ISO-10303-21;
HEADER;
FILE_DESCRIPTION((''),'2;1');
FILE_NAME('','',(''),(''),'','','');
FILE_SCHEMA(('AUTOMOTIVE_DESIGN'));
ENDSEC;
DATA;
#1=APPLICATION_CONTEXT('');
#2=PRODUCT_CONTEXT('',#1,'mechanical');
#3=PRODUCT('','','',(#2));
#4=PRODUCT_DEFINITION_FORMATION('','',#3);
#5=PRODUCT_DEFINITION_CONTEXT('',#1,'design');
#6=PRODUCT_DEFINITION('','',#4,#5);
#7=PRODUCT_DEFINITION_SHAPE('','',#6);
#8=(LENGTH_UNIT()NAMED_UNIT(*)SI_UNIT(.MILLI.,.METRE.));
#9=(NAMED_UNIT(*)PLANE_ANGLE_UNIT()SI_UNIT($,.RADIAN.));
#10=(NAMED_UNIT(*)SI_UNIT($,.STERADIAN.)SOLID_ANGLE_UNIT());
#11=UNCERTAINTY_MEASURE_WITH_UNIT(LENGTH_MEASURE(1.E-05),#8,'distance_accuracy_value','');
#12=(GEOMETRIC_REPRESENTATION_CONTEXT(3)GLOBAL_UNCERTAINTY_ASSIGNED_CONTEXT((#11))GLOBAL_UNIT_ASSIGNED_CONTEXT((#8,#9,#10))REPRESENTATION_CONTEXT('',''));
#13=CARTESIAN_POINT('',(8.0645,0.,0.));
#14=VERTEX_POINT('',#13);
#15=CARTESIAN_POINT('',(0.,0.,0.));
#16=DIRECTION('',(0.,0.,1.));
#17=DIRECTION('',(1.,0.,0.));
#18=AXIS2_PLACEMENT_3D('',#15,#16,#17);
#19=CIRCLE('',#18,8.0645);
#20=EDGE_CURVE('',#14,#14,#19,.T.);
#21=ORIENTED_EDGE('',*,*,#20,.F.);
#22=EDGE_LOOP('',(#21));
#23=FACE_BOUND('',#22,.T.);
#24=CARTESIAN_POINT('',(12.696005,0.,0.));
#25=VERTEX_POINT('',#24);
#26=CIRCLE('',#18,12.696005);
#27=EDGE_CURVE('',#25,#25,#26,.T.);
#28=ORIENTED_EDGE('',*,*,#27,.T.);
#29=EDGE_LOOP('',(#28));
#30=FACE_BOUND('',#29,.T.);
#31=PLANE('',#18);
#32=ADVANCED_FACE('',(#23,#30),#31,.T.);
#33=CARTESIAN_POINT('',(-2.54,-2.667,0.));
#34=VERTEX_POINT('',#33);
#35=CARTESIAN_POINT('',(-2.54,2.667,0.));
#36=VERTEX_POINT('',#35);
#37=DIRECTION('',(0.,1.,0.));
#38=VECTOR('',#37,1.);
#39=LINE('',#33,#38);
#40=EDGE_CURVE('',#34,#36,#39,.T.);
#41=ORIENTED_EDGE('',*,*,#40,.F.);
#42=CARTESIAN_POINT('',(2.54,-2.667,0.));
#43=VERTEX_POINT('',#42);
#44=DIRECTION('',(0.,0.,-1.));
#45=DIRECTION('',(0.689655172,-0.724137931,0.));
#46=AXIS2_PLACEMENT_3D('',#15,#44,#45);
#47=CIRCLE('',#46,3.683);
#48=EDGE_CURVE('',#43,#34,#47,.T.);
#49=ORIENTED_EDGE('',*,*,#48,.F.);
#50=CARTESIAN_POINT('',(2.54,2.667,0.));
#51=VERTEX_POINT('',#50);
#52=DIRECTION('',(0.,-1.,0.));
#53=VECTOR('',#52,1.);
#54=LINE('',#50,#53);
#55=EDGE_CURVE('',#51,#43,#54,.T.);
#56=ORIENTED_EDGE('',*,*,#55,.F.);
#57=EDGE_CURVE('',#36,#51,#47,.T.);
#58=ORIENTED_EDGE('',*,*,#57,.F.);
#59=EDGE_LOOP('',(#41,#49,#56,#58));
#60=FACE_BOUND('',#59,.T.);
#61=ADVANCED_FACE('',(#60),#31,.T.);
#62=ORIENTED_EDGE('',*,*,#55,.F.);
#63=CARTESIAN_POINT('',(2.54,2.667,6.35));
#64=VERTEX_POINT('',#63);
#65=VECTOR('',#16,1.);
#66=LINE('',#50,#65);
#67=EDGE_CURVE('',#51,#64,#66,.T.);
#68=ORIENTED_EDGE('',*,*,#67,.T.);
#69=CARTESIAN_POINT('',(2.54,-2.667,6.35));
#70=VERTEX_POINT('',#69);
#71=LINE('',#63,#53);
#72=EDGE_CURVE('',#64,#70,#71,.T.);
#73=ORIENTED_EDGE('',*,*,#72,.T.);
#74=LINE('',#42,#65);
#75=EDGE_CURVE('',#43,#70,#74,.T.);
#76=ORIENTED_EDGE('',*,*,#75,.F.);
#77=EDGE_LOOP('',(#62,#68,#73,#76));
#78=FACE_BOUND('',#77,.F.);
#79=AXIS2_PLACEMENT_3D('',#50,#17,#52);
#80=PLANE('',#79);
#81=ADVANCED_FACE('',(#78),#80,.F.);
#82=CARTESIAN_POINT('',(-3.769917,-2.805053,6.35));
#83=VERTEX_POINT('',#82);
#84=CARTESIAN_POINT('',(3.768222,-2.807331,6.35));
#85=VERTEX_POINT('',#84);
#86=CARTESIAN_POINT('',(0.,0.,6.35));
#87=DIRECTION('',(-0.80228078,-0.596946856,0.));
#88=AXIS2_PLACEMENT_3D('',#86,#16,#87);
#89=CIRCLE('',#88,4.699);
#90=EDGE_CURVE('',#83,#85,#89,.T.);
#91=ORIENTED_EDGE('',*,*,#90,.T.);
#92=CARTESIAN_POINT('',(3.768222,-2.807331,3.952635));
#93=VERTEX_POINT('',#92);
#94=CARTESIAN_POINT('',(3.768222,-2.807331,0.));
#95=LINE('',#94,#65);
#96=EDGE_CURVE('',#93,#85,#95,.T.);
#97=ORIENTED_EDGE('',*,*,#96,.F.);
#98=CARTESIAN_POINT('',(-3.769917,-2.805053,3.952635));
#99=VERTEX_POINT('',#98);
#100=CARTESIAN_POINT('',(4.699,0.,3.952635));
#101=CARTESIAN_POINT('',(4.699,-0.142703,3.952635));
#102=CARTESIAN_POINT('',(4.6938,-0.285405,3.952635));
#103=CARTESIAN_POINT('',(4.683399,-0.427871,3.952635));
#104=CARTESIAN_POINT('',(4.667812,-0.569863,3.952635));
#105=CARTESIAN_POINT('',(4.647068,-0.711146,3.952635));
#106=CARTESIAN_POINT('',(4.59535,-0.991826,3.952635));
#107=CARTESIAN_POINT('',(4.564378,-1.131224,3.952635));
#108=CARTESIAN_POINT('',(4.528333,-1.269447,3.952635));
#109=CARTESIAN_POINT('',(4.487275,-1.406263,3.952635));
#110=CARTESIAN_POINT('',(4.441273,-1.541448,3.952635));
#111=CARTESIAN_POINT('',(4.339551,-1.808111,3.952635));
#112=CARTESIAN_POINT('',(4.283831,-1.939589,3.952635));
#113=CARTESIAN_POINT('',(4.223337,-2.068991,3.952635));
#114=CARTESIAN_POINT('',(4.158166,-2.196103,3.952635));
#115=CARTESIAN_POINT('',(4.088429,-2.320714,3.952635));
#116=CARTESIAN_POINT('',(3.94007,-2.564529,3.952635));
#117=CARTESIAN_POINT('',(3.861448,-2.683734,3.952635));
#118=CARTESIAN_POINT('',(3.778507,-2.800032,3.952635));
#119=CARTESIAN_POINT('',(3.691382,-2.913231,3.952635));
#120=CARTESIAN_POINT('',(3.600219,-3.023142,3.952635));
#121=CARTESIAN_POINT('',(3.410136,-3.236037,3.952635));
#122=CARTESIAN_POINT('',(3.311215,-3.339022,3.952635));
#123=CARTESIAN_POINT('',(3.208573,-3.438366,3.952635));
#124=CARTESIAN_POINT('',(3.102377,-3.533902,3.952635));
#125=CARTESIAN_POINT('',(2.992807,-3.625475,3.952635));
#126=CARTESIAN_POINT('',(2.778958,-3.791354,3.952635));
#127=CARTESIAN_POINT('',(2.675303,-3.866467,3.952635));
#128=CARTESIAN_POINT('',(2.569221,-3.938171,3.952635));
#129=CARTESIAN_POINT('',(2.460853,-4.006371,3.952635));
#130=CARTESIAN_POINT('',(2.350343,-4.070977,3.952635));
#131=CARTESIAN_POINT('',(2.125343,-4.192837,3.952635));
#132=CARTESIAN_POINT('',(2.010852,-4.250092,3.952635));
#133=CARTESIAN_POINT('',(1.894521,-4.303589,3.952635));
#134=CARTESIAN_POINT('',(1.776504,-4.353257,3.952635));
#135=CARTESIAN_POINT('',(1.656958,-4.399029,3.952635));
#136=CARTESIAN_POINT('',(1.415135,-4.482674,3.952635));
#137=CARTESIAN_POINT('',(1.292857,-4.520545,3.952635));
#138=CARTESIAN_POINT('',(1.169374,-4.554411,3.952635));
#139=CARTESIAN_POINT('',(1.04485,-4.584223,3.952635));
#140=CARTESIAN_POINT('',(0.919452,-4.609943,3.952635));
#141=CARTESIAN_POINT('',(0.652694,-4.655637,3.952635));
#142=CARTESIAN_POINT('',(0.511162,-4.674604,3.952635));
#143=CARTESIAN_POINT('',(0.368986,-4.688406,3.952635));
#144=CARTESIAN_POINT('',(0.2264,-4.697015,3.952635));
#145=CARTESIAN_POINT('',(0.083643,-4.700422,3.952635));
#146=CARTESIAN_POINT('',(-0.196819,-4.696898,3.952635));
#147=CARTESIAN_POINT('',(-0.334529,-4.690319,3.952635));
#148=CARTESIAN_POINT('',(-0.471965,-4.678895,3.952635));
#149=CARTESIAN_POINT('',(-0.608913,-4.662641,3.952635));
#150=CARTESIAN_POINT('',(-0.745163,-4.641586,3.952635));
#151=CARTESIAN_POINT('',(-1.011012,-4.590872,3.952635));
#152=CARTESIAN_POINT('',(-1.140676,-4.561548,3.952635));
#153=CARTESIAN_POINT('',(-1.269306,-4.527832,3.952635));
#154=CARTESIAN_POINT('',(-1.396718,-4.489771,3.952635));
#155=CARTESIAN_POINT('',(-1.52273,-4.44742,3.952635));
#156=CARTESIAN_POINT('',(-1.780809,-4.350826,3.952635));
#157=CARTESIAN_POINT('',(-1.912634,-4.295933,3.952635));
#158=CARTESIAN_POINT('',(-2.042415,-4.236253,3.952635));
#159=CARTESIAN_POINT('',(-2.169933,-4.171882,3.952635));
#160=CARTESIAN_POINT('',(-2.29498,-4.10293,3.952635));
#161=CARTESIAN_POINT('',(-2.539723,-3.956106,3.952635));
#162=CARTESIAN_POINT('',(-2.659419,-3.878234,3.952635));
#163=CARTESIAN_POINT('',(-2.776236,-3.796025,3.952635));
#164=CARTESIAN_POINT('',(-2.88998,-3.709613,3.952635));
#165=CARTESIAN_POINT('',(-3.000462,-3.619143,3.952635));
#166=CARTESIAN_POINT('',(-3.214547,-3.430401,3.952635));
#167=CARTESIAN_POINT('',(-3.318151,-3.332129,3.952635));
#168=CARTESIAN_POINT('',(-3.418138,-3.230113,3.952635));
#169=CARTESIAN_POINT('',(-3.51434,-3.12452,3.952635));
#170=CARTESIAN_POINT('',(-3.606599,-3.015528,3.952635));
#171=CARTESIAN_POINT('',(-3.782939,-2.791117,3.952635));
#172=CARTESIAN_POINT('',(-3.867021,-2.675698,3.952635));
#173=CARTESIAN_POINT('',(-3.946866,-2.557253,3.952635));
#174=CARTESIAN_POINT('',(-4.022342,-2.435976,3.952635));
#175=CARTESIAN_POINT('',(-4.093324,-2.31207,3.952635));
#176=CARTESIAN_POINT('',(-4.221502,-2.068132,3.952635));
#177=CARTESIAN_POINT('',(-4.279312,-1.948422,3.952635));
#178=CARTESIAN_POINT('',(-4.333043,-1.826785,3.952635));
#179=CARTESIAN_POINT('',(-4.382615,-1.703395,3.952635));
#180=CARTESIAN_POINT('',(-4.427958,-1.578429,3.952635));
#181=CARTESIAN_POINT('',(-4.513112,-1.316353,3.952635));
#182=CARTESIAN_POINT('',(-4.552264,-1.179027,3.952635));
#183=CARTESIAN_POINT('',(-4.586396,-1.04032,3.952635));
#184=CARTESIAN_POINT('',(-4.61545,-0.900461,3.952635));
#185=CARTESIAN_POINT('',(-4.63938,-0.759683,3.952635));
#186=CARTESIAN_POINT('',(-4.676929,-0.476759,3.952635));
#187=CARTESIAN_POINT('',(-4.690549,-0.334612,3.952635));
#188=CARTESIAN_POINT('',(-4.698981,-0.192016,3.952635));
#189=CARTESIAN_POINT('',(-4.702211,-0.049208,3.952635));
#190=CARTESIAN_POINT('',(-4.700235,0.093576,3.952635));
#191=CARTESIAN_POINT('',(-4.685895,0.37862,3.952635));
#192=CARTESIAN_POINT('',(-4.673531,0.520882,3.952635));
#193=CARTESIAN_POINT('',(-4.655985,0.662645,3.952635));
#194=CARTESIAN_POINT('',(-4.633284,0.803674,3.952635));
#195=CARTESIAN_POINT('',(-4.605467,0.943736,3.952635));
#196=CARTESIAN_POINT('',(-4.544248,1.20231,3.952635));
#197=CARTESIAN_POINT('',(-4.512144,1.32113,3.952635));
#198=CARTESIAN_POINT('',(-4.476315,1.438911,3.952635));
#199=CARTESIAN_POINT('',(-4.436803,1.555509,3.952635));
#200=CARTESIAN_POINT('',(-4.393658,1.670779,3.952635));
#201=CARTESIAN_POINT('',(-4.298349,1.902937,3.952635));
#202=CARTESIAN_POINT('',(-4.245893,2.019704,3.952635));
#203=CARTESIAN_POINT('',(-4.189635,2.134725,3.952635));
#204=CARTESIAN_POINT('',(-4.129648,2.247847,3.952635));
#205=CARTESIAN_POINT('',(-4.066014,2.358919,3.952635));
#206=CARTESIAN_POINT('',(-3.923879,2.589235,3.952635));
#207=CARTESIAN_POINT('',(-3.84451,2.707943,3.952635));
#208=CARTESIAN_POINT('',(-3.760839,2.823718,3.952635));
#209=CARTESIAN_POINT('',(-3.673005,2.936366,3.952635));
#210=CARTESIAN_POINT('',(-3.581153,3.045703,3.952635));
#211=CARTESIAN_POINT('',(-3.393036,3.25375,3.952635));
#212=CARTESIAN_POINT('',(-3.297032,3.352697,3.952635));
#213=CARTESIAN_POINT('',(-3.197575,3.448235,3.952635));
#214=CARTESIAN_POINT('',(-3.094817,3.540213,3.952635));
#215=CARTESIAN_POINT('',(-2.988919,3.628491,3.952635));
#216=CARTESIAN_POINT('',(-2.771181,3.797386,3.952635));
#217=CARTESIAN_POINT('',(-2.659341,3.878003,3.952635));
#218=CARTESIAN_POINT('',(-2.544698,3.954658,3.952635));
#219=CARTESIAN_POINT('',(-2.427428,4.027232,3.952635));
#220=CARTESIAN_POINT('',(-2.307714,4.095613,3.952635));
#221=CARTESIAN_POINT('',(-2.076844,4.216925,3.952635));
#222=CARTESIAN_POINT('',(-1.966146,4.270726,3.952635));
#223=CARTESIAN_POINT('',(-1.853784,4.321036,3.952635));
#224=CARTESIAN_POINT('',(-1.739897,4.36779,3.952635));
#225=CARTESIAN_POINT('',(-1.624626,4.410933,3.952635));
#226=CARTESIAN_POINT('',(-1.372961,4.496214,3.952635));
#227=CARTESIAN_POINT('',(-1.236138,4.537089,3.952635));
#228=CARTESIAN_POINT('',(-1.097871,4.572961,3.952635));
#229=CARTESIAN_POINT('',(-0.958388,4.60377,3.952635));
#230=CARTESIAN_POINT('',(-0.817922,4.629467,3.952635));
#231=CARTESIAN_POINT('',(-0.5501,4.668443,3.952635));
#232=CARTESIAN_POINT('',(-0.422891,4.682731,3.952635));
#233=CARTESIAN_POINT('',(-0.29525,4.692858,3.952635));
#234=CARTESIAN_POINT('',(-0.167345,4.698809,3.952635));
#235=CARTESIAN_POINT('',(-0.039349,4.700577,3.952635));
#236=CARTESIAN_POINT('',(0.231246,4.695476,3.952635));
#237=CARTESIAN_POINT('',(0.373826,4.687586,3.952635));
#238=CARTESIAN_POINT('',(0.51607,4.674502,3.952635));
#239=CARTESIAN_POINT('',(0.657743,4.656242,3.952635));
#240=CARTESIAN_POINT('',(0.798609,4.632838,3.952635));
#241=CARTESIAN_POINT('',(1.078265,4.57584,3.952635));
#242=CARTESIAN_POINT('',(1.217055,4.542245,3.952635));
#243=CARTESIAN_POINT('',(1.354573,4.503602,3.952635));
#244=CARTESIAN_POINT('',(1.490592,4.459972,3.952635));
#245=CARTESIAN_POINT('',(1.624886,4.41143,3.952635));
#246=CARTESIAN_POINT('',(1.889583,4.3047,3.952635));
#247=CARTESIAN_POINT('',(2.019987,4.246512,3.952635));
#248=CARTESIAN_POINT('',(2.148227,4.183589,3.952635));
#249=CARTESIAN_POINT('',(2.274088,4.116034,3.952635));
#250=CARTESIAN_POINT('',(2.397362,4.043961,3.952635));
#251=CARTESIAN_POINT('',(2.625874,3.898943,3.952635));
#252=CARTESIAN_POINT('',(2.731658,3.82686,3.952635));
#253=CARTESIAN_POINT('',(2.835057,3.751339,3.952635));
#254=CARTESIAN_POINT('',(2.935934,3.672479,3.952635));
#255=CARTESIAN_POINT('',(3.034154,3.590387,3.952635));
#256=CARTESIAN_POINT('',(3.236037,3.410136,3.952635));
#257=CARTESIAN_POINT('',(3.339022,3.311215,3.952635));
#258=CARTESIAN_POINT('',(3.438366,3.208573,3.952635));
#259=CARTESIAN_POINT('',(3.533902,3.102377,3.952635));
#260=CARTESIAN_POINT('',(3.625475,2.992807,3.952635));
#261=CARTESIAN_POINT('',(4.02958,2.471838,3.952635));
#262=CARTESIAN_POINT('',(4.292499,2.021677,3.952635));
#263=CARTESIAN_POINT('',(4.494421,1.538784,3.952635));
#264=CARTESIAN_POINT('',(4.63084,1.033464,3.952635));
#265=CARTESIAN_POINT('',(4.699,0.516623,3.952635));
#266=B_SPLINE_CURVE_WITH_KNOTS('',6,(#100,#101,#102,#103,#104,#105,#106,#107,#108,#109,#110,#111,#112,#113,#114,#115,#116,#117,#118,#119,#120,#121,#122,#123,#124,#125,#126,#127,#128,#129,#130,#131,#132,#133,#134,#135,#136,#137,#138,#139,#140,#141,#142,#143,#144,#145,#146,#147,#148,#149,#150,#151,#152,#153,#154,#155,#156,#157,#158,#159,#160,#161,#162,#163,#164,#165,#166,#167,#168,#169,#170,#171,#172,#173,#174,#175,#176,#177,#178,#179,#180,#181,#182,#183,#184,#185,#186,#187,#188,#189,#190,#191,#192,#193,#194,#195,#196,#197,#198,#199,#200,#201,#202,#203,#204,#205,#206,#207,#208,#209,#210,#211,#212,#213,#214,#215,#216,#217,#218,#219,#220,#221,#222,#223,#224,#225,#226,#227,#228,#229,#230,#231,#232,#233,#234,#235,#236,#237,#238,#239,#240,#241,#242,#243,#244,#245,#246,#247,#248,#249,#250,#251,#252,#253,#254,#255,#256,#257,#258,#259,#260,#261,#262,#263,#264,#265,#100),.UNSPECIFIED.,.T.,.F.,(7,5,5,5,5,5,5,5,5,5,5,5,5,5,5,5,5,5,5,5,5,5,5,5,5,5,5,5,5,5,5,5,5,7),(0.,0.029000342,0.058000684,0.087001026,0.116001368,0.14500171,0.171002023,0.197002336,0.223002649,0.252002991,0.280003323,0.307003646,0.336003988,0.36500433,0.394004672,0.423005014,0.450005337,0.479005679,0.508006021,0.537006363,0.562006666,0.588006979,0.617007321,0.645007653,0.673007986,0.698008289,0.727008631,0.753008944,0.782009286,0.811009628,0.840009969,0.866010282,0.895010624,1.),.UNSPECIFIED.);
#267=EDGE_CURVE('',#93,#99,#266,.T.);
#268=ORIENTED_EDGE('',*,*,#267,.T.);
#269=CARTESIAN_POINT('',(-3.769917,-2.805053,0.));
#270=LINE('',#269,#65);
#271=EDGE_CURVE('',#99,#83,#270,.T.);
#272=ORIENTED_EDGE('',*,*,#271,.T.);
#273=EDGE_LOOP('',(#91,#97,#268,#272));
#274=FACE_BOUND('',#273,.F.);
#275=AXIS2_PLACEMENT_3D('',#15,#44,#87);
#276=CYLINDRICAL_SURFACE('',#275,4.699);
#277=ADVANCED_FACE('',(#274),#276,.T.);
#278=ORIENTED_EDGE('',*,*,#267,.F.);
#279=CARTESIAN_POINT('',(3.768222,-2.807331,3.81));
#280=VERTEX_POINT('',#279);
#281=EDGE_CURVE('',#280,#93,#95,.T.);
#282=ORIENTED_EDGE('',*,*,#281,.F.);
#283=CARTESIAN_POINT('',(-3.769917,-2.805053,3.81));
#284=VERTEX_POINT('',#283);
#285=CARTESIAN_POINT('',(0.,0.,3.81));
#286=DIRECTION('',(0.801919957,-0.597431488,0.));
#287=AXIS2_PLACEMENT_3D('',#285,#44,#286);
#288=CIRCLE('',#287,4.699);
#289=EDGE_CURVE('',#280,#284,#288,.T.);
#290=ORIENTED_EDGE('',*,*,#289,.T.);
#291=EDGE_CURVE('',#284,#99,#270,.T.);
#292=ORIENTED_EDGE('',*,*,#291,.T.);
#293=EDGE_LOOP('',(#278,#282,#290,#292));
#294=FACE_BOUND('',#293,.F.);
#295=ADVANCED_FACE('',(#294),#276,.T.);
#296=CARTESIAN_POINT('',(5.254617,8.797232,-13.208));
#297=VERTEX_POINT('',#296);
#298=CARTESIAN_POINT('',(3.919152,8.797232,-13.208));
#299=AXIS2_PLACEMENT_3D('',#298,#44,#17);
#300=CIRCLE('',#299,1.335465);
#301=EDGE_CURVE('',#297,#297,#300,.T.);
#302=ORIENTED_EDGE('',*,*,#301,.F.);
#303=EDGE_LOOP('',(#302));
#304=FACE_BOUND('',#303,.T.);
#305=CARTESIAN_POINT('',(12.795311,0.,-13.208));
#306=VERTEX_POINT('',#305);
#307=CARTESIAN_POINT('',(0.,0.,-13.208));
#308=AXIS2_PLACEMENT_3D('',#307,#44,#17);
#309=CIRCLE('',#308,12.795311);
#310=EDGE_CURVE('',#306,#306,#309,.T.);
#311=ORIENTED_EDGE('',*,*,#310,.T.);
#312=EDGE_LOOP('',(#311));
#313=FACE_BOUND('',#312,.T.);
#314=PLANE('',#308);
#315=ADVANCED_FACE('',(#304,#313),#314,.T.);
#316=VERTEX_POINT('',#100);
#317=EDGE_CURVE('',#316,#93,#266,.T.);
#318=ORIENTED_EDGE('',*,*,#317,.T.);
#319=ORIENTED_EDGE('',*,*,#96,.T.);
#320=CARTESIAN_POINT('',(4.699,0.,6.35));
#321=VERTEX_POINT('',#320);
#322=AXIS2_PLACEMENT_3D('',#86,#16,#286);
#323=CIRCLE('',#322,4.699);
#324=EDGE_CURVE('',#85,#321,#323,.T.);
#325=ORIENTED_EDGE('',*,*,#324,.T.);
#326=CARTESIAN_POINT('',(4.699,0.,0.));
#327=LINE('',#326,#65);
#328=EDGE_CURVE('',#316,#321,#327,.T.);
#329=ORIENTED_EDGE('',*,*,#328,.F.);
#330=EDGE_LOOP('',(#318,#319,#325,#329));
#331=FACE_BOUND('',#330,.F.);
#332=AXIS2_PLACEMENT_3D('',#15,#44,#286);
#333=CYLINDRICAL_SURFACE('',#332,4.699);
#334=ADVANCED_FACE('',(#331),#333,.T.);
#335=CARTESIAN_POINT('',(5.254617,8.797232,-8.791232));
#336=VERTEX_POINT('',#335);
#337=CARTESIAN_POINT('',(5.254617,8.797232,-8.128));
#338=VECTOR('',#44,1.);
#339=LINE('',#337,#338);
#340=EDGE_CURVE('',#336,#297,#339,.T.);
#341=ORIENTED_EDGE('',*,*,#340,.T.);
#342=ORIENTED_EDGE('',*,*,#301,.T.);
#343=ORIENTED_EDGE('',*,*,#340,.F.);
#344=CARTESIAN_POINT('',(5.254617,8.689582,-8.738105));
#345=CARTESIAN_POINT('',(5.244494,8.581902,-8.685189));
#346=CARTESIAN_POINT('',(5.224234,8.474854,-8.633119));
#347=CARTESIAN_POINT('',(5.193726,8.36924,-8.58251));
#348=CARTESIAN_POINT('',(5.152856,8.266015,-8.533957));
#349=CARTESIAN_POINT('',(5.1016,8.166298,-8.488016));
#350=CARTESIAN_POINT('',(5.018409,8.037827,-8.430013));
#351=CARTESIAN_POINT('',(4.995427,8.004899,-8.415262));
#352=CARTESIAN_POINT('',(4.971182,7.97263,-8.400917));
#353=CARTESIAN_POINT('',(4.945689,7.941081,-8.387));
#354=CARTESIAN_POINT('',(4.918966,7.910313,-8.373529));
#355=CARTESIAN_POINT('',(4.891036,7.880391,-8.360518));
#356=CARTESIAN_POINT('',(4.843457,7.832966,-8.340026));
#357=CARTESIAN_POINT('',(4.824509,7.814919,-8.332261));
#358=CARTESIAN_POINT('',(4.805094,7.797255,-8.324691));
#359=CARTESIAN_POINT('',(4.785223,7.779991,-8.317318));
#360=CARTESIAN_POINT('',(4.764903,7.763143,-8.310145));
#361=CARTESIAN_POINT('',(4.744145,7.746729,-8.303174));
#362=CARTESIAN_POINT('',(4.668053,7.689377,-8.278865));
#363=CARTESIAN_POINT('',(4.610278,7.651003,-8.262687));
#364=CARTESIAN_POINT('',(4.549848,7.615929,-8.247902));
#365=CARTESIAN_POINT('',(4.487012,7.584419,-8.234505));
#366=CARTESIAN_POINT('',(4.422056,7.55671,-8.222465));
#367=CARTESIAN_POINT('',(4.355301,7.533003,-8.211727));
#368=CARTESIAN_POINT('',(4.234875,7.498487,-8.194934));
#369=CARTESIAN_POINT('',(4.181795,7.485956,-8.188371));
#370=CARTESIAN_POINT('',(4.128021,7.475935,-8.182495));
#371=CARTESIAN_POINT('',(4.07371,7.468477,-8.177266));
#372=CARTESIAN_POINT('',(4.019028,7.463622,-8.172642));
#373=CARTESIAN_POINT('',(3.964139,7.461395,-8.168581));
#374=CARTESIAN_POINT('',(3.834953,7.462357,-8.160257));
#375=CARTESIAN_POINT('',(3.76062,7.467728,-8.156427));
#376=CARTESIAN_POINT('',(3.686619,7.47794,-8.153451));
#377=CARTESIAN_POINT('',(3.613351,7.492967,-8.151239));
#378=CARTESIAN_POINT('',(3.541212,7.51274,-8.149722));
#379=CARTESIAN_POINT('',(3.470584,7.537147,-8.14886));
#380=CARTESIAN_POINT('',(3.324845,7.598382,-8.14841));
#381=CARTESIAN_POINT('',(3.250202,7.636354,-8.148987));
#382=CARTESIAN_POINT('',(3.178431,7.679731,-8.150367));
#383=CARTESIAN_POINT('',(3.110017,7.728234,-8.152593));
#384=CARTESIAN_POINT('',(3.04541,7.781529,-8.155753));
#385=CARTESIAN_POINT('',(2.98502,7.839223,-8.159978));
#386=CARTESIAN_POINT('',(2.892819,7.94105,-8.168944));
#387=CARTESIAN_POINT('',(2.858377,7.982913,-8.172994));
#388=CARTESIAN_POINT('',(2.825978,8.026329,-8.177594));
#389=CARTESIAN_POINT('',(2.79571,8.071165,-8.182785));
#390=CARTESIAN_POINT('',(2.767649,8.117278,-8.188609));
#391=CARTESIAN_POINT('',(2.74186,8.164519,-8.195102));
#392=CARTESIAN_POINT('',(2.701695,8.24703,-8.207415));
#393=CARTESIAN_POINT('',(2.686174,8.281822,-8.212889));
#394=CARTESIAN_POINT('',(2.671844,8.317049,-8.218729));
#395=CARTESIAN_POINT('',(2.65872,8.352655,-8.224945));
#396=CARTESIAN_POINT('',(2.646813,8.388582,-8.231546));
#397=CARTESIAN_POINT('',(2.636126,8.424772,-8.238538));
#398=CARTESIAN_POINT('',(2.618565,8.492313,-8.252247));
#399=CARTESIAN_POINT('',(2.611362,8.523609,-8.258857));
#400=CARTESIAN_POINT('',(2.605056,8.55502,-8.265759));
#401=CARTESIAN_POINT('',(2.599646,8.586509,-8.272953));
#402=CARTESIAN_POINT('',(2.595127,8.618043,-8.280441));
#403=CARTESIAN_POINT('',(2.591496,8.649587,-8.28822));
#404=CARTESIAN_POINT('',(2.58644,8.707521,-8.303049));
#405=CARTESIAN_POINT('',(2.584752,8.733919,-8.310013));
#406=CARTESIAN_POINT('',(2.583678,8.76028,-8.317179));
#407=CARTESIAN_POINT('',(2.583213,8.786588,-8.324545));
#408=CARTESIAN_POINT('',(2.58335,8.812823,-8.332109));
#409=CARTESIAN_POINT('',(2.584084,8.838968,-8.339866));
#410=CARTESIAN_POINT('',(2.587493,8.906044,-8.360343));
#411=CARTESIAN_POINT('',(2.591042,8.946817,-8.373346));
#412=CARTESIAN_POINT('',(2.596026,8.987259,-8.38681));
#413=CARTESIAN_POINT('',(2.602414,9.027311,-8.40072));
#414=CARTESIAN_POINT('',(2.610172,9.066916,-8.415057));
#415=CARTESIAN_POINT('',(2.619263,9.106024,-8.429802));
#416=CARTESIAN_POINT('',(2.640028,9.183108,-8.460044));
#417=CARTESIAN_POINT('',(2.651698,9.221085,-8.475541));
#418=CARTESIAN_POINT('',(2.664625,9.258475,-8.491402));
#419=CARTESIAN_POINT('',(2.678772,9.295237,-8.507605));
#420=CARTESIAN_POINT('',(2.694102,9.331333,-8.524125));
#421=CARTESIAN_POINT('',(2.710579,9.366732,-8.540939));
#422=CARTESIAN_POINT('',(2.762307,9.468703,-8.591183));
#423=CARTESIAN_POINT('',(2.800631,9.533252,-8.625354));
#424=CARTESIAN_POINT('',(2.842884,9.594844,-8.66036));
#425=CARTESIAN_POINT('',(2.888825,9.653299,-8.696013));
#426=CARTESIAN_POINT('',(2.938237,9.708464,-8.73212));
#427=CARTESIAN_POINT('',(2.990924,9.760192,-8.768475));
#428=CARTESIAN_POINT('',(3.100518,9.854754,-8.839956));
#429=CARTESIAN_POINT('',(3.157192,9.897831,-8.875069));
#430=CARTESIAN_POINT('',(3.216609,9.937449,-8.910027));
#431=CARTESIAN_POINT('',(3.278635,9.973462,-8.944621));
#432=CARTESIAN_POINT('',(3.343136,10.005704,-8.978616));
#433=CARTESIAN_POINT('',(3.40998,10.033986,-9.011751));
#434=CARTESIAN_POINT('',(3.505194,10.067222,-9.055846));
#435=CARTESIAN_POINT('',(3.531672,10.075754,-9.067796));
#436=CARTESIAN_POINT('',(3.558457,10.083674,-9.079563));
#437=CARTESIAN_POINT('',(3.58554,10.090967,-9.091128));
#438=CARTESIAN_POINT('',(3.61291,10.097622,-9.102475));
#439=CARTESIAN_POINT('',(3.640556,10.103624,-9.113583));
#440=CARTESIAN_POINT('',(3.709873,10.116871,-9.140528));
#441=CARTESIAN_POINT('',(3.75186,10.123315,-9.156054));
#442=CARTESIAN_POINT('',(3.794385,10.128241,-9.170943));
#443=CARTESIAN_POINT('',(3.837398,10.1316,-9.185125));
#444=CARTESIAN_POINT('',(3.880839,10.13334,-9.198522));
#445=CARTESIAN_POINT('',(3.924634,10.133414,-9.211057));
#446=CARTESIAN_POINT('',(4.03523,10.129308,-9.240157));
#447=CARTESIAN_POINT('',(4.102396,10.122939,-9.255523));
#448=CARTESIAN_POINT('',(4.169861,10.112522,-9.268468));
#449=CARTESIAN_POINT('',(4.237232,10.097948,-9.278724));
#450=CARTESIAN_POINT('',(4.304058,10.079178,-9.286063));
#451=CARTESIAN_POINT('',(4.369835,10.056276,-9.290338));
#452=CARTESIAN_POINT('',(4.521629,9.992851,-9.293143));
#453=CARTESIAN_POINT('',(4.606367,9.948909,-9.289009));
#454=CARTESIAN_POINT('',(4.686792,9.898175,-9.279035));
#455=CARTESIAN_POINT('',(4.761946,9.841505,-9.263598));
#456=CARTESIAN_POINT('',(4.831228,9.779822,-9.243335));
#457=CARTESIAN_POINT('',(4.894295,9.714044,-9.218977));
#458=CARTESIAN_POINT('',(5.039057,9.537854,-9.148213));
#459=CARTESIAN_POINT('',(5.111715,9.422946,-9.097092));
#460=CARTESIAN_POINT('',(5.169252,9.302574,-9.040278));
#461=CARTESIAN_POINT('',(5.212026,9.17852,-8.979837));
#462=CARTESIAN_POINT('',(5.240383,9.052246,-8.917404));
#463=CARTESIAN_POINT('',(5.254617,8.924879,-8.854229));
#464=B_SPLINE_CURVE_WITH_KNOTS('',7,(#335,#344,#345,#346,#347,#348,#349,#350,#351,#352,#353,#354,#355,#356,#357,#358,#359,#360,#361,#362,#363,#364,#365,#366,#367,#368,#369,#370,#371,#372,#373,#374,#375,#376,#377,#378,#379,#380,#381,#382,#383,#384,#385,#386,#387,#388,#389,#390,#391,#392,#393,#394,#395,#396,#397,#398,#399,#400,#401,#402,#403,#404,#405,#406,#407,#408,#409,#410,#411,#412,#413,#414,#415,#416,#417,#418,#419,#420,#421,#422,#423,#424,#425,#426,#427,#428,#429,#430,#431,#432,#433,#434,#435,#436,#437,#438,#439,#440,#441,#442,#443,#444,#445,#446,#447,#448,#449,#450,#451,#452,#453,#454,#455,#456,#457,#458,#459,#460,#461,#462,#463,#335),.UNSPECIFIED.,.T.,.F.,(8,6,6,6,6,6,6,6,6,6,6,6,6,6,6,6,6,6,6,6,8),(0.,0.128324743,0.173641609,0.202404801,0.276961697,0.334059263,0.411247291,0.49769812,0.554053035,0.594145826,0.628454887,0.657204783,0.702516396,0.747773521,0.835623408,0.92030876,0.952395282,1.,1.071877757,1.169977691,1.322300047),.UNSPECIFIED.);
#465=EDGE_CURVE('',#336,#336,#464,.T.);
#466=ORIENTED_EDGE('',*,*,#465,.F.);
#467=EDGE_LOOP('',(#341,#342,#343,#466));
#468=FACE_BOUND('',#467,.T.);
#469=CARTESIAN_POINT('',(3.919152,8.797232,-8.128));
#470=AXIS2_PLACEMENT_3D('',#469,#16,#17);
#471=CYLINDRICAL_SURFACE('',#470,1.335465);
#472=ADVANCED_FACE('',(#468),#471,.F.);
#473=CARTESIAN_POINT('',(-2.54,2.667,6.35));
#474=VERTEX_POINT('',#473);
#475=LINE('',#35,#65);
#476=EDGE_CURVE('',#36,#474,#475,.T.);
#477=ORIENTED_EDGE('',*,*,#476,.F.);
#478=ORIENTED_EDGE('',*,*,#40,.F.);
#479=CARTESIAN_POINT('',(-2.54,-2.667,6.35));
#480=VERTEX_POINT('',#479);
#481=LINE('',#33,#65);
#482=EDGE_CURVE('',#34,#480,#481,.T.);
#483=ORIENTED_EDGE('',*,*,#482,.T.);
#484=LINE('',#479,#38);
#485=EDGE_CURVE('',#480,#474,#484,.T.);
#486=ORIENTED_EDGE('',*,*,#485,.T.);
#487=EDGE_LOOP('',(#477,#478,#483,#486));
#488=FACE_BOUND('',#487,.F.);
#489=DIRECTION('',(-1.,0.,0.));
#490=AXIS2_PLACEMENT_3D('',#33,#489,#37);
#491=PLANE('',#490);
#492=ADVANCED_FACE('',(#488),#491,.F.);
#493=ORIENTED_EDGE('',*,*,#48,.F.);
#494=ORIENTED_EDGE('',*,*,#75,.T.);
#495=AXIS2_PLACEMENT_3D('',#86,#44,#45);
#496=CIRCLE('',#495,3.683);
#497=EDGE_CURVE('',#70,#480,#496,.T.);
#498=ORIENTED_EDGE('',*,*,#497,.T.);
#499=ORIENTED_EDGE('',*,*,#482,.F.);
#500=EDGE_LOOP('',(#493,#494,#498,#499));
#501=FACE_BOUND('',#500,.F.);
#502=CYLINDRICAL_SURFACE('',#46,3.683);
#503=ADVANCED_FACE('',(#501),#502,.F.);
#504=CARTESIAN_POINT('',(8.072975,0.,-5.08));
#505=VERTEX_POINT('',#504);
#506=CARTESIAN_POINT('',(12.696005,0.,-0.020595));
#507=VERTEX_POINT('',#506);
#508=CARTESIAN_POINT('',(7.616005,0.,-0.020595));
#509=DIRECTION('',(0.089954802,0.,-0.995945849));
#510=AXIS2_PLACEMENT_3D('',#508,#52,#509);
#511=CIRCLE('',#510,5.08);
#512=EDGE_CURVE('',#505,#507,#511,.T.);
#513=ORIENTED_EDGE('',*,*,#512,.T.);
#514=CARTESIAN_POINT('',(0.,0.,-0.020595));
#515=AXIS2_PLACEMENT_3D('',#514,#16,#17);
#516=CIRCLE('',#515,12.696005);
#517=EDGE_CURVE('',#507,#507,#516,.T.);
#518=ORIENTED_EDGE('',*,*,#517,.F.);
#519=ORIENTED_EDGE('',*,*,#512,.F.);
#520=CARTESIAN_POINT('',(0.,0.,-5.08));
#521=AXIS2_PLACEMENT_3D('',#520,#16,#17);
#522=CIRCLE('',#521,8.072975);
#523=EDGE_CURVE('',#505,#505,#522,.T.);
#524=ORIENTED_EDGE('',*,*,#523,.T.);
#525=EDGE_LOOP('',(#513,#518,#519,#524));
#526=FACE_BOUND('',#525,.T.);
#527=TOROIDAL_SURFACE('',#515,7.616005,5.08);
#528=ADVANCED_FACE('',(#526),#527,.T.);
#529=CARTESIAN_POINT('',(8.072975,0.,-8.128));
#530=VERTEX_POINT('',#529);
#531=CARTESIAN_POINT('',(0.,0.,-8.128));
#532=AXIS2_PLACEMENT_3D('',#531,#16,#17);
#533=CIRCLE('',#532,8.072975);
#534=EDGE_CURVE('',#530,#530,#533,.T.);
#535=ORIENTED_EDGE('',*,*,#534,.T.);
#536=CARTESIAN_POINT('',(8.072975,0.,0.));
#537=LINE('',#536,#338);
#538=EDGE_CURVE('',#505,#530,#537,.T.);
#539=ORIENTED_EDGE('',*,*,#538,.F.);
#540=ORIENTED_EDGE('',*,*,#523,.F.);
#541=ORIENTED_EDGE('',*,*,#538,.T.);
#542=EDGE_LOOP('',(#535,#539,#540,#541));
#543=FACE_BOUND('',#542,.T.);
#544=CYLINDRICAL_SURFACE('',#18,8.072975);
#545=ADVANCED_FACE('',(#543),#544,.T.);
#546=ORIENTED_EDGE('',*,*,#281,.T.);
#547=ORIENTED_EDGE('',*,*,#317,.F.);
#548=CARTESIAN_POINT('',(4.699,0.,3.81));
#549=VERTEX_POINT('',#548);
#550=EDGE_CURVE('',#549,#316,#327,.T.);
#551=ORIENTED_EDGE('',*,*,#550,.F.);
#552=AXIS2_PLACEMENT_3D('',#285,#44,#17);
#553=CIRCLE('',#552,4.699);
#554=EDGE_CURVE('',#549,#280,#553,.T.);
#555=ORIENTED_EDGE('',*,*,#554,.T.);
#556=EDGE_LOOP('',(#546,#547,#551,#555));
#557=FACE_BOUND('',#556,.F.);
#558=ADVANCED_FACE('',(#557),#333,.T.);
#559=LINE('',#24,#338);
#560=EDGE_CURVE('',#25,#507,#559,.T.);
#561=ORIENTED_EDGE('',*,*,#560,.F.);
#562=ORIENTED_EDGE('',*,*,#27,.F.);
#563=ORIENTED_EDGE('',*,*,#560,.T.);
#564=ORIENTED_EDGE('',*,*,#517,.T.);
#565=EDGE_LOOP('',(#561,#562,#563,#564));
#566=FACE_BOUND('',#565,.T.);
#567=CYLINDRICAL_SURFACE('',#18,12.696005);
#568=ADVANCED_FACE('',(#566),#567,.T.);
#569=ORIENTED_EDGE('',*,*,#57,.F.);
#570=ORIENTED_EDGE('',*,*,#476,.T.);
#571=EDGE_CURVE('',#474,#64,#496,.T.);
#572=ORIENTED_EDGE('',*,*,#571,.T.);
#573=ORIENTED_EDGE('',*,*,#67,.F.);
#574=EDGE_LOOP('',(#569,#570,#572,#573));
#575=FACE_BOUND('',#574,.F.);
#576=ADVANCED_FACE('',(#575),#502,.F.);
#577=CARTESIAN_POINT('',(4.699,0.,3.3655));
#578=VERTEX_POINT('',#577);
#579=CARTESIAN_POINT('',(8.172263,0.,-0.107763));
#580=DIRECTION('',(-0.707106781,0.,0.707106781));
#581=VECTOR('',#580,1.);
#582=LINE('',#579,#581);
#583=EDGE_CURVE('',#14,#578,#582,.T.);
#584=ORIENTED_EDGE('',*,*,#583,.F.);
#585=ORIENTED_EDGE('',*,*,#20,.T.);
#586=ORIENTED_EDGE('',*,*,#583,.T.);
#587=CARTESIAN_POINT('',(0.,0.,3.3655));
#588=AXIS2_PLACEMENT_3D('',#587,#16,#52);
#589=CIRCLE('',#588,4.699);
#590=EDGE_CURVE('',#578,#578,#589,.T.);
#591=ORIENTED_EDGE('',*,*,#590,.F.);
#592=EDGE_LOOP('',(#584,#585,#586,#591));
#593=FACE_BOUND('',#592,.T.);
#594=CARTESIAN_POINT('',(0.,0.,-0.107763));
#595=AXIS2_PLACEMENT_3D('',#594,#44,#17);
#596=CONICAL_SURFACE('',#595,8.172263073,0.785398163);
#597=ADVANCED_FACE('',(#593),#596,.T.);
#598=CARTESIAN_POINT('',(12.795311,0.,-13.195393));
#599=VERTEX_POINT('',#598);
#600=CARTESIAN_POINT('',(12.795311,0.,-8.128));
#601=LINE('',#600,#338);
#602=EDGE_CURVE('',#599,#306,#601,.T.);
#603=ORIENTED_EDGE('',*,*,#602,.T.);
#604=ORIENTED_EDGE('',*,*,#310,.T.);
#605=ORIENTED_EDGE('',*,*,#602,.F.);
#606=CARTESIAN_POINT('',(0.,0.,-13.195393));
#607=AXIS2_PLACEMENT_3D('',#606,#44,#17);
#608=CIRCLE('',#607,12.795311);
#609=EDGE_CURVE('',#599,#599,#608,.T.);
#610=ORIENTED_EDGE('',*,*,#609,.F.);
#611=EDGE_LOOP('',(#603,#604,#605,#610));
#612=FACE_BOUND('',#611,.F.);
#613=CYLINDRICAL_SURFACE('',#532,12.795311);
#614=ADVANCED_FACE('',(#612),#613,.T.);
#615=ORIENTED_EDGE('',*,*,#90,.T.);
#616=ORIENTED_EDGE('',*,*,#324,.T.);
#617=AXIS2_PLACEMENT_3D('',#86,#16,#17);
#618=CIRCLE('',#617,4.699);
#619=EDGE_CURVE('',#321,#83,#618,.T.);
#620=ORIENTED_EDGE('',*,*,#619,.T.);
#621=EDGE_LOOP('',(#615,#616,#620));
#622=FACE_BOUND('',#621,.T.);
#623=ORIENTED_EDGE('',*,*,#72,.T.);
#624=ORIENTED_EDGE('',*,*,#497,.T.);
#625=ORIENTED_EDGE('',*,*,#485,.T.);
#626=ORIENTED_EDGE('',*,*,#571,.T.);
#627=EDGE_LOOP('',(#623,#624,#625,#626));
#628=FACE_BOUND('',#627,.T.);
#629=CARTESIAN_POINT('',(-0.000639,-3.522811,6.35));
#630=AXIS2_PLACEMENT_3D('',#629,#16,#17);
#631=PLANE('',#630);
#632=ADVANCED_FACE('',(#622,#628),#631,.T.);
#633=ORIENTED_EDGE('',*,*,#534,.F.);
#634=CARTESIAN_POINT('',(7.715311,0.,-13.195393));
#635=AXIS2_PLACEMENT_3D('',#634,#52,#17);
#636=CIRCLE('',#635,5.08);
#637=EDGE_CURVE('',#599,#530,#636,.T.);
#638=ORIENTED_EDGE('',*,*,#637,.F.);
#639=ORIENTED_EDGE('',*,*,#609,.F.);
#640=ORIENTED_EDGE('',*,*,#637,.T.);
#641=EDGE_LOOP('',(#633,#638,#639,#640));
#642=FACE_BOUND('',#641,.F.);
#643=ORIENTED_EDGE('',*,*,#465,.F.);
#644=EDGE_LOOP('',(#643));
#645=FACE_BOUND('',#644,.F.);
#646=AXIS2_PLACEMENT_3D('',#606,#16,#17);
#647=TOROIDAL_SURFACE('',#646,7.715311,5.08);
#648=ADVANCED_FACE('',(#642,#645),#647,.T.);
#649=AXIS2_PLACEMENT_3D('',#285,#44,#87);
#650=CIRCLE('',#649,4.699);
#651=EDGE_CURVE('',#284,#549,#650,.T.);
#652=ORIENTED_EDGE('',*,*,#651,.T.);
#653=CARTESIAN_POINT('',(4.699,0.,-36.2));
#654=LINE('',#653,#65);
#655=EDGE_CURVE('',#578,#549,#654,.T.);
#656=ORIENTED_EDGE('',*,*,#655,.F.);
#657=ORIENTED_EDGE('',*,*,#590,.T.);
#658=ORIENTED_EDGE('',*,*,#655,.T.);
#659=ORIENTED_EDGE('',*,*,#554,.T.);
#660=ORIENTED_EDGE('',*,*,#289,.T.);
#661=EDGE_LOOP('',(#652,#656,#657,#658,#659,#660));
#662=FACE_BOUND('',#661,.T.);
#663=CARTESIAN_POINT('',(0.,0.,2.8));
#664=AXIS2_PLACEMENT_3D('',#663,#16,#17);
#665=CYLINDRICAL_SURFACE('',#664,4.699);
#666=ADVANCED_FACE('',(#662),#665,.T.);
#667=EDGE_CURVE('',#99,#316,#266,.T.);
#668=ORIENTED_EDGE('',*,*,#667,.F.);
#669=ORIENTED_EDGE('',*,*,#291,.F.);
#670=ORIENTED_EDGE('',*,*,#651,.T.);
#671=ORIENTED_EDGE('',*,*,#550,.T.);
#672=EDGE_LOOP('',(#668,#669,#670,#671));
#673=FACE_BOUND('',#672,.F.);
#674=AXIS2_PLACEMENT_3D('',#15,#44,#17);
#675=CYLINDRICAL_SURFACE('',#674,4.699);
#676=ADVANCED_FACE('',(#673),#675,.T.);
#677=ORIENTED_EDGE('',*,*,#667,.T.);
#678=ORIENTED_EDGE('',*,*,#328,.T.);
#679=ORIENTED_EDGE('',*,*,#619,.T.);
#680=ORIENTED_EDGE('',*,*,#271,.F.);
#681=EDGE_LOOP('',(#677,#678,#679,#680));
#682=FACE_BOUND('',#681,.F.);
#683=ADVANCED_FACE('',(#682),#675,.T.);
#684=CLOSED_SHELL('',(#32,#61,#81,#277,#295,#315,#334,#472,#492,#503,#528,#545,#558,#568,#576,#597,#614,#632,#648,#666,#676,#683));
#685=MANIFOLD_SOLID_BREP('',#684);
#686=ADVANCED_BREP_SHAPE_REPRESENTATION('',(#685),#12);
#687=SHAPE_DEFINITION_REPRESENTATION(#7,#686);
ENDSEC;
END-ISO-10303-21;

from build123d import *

# Parameters (mm, degrees)
F1_DEPTH    = 6.35
F2_R        = 12.6960047963
F2_R_2      = 8.0729751922
F3_DEPTH    = 5.08
F4_DEPTH    = 8.128
F5_R        = 12.7953112481
F5_R_2      = 1.3354653725
F5_R_3      = 8.0729751922
F6_DEPTH    = 5.08
F0_R        = 8.0645
F8_DEPTH    = 3.81
F9_S6_R     = 4.699
F9_T7_DEPTH = 39


# Not quite as in the source:
# - a fillet or chamfer that OpenCascade refuses, or shapes differently, is made with other operations: its cross-section is extruded or revolved along the edge and cut away or added


with BuildPart() as f1:
    # F0 (on Top) → F1 (new body)
    with BuildSketch(Plane.XY):
        with BuildLine():
            Line((-2.54, -2.8050532779), (-3.7699173874, -2.8050532779))
            ThreePointArc((-3.7699173874, -2.8050532779), (-0.0014195763, -4.6989997856), (3.7682218762, -2.8073305634))
            Line((3.7682218762, -2.8073305634), (2.54, -2.8073305634))
            Line((2.54, -2.8073305634), (2.54, -2.667))
            ThreePointArc((2.54, -2.667), (0, -3.683), (-2.54, -2.667))
            Line((-2.54, -2.667), (-2.54, -2.8050532779))
        make_face()
        with BuildLine():
            Line((2.54, 0), (2.54, -2.667))
            ThreePointArc((2.54, -2.667), (3.3852111456, -1.4508047767), (3.683, 0))
            ThreePointArc((3.683, 0), (3.3852111456, 1.4508047767), (2.54, 2.667))
            Line((2.54, 2.667), (2.54, 0))
        make_face()
        with BuildLine():
            Line((2.54, -2.8073305634), (3.7682218762, -2.8073305634))
            Line((3.7682218762, -2.8073305634), (3.7682218762, 2.667))
            Line((3.7682218762, 2.667), (2.54, 2.667))
            ThreePointArc((2.54, 2.667), (3.3852111456, 1.4508047767), (3.683, 0))
            ThreePointArc((3.683, 0), (3.3852111456, -1.4508047767), (2.54, -2.667))
            Line((2.54, -2.667), (2.54, -2.8073305634))
        make_face()
        with BuildLine():
            ThreePointArc((3.7682218762, -2.8073305634), (4.460239657, -1.4788046531), (4.699, 0))
            ThreePointArc((4.699, 0), (-1.4774571392, 4.460686203), (-3.7699173874, -2.8050532779))
            Line((-3.7699173874, -2.8050532779), (-3.7699173874, 2.667))
            Line((-3.7699173874, 2.667), (-2.54, 2.667))
            ThreePointArc((-2.54, 2.667), (0, 3.683), (2.54, 2.667))
            Line((2.54, 2.667), (3.7682218762, 2.667))
            Line((3.7682218762, 2.667), (3.7682218762, -2.8073305634))
        make_face()
        with BuildLine():
            Line((-3.7699173874, 2.667), (-3.7699173874, -2.8050532779))
            Line((-3.7699173874, -2.8050532779), (-2.54, -2.8050532779))
            Line((-2.54, -2.8050532779), (-2.54, -2.667))
            ThreePointArc((-2.54, -2.667), (-3.683, 0), (-2.54, 2.667))
            Line((-2.54, 2.667), (-3.7699173874, 2.667))
        make_face()
        with BuildLine():
            ThreePointArc((-2.54, 2.667), (-3.683, 0), (-2.54, -2.667))
            Line((-2.54, -2.667), (-2.54, 0))
            Line((-2.54, 0), (-2.54, 2.667))
        make_face()
    extrude(amount=F1_DEPTH)



with BuildPart() as f3:
    # F2 (on Top) → F3 (new body)
    with BuildSketch(Plane.XY):
        Circle(F2_R)
        Circle(F2_R_2, mode=Mode.SUBTRACT)
    extrude(amount=-F3_DEPTH)


with BuildPart() as f1_1:
    add(f1.part)

    add(f3.part)  # F4 merges F3
    # F2 (on Top) → F4 (join)
    with BuildSketch(Plane.XY):
        Circle(F2_R_2)
    extrude(amount=-F4_DEPTH)

    # F5 (on face) → F6 (join)
    with BuildSketch(Plane(origin=(0, 0, -8.128), x_dir=(1, 0, 0), z_dir=(0, 0, -1))):
        Circle(F5_R)
        with Locations((3.9191520773, -8.7972320383)):
            Circle(F5_R_2, mode=Mode.SUBTRACT)
        Circle(F5_R_3, mode=Mode.SUBTRACT)
        Circle(F5_R_3)
    extrude(amount=F6_DEPTH)

    # F7: fillet of radius 5.08 on 2 edges, made by hand

    # F7_s1 → F7_t2 (revolve, cut)
    with BuildSketch(Plane.XZ):
        with BuildLine():
            ThreePointArc((12.7953112481, -13.1953934624), (11.4317162877, -9.7320520727), (8.0729751922, -8.128))
            Line((8.0729751922, -8.128), (12.7953112481, -8.128))
            Line((12.7953112481, -8.128), (12.7953112481, -13.1953934624))
        make_face()
    revolve(axis=Axis((0, 0, -8.128), (0, 0, -1)), mode=Mode.SUBTRACT)

    # F7_s3 → F7_t4 (revolve, cut)
    with BuildSketch(Plane.XZ):
        with BuildLine():
            ThreePointArc((8.0729751922, -5.08), (11.366192099, -3.4473275256), (12.6960047963, -0.0205950886))
            Line((12.6960047963, -0.0205950886), (12.6960047963, -5.08))
            Line((12.6960047963, -5.08), (8.0729751922, -5.08))
        make_face()
    revolve(axis=Axis((0, 0, -5.08), (0, 0, 1)), mode=Mode.SUBTRACT)

    # F0 (on Top) → F8 (join)
    with BuildSketch(Plane.XY):
        Circle(F0_R)
        with BuildLine():
            ThreePointArc((-3.7699173874, -2.8050532779), (-1.4774571392, 4.460686203), (4.699, 0))
            ThreePointArc((4.699, 0), (4.460239657, -1.4788046531), (3.7682218762, -2.8073305634))
            ThreePointArc((3.7682218762, -2.8073305634), (-0.0014195763, -4.6989997856), (-3.7699173874, -2.8050532779))
        make_face(mode=Mode.SUBTRACT)
    extrude(amount=F8_DEPTH)

    # F9: chamfer of 3.81 on 1 edges, made by hand


with BuildPart() as f9_tool2:
    # F9_s3 → F9_t4 (revolve)
    with BuildSketch(Plane.XZ):
        with BuildLine():
            Line((8.1722630735, -0.1077630735), (4.1467369265, 3.9177630735))
            Line((4.1467369265, 3.9177630735), (4.1467369265, 3.9939630735))
            ThreePointArc((4.1467369265, 3.9939630735), (6.1056184633, 3.8862), (8.0645, 3.8862))
            Line((8.0645, 3.8862), (8.1407, 3.81))
            ThreePointArc((8.1407, 3.81), (8.1407, 1.8511184633), (8.2484630735, -0.1077630735))
            Line((8.2484630735, -0.1077630735), (8.1722630735, -0.1077630735))
        make_face()
    revolve(axis=Axis((0, 0, 3.81), (0, 0, 1)))

    split(bisect_by=Plane.XY, keep=Keep.TOP)

    # F9_s6 → F9_t7 (cut, symmetric)
    with BuildSketch(Plane.XY.offset(2.8)):
        Circle(F9_S6_R)
    extrude(amount=F9_T7_DEPTH, both=True, mode=Mode.SUBTRACT)


with BuildPart() as f1_2:
    add(f1_1.part)

    # F9_t1: cut F9_tool2
    add(f9_tool2.part, mode=Mode.SUBTRACT)


solid = f1_2.part
